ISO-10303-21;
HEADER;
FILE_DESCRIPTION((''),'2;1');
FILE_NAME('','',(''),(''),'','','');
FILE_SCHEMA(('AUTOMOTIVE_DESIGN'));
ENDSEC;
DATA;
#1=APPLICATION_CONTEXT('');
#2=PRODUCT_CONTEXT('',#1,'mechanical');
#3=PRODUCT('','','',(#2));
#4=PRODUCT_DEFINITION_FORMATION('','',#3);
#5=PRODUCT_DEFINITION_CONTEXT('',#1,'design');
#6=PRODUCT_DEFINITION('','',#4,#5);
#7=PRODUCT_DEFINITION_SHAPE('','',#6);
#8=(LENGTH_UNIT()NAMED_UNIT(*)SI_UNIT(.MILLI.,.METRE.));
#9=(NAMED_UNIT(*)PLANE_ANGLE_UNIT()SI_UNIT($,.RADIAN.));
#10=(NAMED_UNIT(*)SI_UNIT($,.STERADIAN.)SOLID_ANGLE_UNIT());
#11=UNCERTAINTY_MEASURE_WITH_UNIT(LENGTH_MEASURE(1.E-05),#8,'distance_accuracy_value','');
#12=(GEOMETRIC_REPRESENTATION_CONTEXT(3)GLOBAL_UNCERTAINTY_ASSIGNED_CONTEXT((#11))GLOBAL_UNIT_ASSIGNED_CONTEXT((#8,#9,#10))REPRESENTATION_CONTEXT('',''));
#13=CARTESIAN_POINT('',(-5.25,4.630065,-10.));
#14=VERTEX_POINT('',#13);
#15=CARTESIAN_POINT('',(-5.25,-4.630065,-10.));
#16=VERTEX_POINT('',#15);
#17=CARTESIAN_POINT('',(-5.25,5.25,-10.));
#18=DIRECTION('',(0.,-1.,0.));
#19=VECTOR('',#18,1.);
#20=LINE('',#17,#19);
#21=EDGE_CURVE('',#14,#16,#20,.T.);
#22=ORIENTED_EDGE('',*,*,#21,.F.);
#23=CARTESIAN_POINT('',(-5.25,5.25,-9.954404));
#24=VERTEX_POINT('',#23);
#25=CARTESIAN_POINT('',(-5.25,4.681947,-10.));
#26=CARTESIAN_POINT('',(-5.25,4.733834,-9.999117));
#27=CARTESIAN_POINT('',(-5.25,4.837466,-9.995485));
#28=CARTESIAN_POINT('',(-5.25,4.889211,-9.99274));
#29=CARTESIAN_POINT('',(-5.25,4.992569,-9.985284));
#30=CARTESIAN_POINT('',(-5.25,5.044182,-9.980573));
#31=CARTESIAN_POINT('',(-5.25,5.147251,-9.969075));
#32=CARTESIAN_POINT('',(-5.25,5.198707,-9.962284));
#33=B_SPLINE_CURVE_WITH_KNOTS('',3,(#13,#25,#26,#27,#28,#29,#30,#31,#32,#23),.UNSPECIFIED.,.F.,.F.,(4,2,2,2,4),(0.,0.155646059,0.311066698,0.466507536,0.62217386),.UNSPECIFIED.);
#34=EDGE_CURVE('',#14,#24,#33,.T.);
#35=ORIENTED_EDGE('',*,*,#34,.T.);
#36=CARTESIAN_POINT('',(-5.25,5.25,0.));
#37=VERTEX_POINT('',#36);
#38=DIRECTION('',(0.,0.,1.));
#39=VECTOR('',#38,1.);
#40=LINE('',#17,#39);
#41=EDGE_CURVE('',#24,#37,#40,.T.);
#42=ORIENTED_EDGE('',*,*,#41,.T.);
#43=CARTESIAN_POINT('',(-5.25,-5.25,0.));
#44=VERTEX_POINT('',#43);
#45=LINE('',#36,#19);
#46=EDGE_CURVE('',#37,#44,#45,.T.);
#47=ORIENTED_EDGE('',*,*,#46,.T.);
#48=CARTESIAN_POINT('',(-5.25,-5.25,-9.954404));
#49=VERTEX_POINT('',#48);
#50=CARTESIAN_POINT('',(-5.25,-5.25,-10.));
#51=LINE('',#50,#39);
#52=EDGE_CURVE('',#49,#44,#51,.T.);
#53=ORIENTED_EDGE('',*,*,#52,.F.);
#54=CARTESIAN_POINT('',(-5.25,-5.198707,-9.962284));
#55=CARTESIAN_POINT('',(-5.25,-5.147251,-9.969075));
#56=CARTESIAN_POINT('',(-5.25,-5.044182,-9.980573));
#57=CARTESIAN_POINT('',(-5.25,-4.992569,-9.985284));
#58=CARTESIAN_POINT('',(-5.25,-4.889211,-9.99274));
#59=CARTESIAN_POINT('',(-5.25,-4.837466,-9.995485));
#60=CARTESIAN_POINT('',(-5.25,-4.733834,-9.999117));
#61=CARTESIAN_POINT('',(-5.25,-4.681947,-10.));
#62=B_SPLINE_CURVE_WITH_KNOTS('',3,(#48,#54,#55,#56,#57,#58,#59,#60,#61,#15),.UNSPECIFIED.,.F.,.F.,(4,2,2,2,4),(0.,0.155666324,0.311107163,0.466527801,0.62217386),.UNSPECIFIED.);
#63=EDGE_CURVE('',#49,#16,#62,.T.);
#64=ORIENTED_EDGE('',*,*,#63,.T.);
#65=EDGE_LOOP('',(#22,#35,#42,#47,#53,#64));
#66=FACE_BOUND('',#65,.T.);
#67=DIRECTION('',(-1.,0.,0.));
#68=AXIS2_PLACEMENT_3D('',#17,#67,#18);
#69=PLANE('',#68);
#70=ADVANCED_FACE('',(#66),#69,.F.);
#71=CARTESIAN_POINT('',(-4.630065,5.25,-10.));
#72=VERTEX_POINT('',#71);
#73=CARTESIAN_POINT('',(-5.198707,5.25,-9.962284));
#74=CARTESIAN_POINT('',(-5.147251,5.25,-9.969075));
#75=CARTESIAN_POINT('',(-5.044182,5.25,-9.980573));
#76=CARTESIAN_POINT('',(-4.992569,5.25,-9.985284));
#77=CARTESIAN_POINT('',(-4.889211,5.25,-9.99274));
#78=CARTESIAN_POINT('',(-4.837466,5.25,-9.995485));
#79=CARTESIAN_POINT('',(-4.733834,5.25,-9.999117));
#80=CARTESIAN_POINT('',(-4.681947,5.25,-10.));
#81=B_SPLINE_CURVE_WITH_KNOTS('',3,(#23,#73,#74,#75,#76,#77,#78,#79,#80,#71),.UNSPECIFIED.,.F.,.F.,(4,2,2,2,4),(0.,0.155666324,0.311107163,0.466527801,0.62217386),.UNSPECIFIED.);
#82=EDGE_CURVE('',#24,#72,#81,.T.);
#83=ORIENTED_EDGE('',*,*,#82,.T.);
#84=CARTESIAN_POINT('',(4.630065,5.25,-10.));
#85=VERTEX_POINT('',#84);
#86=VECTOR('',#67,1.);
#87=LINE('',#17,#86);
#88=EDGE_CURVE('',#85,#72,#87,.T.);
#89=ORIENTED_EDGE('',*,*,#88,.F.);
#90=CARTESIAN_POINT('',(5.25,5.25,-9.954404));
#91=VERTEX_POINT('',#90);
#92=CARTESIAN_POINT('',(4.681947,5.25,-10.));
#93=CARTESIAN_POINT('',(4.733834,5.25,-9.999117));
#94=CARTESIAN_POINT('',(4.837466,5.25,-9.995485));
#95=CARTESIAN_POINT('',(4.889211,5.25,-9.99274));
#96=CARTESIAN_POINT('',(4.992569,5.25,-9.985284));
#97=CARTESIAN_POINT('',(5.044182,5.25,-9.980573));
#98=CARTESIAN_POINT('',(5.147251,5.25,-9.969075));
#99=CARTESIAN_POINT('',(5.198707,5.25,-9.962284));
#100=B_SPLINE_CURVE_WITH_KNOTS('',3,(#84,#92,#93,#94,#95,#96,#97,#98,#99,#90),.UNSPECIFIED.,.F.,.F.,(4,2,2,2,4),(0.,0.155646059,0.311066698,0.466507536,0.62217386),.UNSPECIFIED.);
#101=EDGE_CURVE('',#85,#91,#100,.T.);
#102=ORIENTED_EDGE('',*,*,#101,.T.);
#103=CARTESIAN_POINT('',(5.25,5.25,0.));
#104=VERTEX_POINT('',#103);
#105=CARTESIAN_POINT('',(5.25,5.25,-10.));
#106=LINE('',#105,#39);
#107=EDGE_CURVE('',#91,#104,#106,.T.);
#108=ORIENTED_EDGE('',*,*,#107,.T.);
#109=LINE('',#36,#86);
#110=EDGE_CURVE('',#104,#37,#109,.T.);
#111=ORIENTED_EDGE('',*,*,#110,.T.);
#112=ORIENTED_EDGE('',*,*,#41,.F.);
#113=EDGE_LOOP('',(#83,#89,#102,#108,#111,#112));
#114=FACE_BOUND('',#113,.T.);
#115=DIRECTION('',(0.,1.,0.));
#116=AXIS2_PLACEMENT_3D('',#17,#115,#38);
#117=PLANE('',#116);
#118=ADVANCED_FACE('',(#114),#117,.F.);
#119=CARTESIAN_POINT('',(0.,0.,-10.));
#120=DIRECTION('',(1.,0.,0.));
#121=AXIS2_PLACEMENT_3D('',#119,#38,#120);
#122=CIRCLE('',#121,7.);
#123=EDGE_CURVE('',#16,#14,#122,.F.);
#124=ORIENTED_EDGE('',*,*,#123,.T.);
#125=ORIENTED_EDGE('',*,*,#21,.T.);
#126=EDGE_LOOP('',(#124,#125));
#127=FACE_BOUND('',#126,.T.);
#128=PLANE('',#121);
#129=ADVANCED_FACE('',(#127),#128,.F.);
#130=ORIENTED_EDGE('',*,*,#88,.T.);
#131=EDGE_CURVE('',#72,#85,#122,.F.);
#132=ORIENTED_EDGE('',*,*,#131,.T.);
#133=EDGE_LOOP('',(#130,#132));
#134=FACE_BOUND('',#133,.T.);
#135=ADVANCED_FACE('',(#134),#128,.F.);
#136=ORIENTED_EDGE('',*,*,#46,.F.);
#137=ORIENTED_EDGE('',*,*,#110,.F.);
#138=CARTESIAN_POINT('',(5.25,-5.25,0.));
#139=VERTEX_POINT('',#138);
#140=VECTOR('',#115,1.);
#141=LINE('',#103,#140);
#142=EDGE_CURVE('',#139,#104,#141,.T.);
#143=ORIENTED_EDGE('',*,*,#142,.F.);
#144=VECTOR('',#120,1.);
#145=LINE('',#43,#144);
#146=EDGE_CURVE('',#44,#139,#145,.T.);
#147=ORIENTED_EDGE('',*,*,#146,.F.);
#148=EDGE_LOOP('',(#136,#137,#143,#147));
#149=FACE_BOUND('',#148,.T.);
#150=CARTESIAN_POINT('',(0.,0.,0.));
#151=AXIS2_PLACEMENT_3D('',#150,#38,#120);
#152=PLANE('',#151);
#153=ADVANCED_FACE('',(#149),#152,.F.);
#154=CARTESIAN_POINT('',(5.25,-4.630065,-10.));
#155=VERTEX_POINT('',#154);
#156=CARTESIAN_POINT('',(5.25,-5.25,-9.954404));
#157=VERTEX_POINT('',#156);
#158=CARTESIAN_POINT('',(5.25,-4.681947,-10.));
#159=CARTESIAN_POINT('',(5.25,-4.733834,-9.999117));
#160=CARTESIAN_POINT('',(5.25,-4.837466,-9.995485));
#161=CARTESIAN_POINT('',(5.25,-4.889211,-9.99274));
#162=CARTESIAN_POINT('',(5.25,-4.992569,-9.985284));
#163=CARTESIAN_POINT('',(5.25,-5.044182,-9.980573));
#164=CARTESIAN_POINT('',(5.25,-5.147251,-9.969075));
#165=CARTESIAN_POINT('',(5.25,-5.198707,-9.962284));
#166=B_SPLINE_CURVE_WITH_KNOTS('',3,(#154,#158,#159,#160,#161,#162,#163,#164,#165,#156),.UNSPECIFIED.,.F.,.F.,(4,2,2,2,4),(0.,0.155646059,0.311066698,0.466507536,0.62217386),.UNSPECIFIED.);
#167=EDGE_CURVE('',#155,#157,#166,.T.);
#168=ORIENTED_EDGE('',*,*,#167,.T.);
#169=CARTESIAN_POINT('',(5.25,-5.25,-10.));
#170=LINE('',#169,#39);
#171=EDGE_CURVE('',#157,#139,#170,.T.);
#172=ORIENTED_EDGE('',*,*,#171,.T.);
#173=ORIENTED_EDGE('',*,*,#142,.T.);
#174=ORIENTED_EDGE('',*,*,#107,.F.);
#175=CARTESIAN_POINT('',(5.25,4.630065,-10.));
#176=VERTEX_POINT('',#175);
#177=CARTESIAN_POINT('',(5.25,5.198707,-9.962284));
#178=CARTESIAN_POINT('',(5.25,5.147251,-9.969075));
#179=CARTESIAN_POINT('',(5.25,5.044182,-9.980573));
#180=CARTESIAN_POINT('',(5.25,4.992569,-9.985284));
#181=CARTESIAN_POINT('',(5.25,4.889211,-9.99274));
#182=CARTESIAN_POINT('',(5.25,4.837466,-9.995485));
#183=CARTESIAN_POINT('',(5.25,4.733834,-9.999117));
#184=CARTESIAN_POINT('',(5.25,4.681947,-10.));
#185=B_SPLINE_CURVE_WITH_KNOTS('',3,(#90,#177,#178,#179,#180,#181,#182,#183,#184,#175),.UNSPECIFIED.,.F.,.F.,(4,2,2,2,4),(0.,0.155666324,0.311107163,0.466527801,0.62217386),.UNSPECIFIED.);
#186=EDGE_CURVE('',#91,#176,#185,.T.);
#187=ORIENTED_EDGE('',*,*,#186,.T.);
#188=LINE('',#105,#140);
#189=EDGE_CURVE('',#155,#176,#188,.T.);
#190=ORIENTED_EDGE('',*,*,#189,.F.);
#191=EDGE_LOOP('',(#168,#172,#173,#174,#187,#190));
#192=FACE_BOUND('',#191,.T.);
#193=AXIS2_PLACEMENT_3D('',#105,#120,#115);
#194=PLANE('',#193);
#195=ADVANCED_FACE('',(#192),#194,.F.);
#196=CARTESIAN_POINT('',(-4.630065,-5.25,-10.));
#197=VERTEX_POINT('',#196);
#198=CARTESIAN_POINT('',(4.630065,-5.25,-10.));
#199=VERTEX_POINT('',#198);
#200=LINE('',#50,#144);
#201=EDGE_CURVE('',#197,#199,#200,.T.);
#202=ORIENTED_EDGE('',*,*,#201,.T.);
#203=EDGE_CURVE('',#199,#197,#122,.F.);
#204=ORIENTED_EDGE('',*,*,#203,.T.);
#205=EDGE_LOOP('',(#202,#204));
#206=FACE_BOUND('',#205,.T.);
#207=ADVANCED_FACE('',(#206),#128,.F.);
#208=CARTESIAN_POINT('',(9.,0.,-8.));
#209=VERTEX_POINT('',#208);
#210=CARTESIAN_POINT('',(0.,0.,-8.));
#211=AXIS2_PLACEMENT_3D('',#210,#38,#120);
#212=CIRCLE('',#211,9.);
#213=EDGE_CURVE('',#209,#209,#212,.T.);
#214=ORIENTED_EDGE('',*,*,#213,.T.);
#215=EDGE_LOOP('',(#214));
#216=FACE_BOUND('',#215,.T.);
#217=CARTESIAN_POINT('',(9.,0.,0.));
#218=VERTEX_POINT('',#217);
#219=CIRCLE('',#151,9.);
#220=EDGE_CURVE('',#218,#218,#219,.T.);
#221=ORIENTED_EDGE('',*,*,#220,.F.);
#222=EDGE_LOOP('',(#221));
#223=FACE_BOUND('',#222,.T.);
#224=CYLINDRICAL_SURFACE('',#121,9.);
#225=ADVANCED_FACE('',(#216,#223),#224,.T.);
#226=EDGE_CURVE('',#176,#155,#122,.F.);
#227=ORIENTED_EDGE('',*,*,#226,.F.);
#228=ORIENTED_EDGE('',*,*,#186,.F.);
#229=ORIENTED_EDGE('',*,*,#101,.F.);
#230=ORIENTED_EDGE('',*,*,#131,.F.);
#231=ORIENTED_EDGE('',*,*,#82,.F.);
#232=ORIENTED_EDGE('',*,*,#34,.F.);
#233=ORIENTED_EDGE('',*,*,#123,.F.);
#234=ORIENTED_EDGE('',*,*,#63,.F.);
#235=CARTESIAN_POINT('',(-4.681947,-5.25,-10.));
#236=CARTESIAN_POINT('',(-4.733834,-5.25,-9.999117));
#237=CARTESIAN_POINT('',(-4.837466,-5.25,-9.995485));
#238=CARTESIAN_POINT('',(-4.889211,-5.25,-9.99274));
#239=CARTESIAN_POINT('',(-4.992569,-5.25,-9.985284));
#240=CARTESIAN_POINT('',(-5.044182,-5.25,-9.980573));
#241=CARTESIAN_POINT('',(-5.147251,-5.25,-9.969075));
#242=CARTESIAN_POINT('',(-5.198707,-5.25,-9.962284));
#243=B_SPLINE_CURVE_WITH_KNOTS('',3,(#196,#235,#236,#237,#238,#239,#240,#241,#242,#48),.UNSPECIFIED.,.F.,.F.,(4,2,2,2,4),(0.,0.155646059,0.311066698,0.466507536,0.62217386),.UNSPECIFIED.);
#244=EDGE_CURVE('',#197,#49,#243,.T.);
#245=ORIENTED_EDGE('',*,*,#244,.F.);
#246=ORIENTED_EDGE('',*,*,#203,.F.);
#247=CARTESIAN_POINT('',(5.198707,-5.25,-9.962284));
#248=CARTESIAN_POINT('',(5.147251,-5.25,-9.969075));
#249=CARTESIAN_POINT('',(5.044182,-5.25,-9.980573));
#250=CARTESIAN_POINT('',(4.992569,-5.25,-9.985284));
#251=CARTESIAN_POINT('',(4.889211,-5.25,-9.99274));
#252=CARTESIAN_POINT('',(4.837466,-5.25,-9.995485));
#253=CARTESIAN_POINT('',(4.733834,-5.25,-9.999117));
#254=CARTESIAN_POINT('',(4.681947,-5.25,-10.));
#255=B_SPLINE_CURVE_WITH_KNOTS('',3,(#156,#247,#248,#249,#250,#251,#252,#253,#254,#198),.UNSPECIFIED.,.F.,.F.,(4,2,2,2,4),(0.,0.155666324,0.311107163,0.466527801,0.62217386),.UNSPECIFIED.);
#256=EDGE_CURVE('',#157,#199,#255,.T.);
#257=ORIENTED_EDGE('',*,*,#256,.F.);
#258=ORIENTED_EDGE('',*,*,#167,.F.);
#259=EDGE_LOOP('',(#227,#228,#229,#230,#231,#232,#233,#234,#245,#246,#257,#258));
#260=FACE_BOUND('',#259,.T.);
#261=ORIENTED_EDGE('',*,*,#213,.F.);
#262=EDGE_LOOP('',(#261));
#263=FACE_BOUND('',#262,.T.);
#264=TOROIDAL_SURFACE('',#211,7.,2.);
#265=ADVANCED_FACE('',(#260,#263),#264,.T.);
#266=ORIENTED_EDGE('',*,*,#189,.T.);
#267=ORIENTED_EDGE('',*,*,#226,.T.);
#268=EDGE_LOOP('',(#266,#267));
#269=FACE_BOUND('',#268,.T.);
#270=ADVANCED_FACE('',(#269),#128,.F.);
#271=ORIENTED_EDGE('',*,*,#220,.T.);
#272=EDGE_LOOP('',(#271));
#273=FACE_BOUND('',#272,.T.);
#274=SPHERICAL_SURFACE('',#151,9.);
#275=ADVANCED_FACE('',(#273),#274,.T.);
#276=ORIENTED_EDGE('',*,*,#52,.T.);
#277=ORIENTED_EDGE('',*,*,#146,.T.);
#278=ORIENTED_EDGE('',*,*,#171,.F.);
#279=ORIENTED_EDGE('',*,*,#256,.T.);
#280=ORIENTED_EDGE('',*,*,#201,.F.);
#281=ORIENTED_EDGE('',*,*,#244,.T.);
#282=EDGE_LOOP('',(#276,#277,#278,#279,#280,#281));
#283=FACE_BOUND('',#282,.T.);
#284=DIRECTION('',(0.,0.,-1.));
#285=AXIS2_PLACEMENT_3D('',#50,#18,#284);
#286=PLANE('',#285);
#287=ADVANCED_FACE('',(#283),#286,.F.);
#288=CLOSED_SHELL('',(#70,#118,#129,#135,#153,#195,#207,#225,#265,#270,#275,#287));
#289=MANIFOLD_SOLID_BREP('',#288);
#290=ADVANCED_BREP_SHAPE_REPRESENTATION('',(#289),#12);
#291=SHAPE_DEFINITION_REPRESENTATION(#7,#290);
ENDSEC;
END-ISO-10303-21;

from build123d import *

# Parameters (mm, degrees)
SKETCH_3_R          = 9
EXTRUDE_1_DEPTH     = 10
SKETCH_2_W          = 10.5
SKETCH_2_H          = 10.5
CUT_EXTRUDE_1_DEPTH = 10
FILLET_1_R          = 2


with BuildPart() as part:
    # 草图1 → 旋转1 (revolve)
    with BuildSketch(Plane.XY):
        with BuildLine():
            Line((0, 9), (0, -9))
            ThreePointArc((0, -9), (9, 0), (0, 9))
        make_face()
    revolve(axis=Axis((0, 9, 0), (0, -1, 0)))

    # 草图3 → 凸台-拉伸1 (add)
    with BuildSketch(Plane.XY):
        Circle(SKETCH_3_R)
    extrude(amount=-EXTRUDE_1_DEPTH)

    # 草图2 → 切除-拉伸1 (cut)
    with BuildSketch(Plane.XY):
        Rectangle(SKETCH_2_W, SKETCH_2_H)
    extrude(amount=-CUT_EXTRUDE_1_DEPTH, mode=Mode.SUBTRACT)

    # 圆角1
    # the kernel refuses this fillet: 2 mm, written as the material it takes off along each edge
    with BuildSketch(Plane(origin=(0, 0, -10), x_dir=(1, 0, 0), z_dir=(0, -1, 0))) as fillet_1_piece_1:
        with BuildLine():
            CenterArc((9 - FILLET_1_R, FILLET_1_R), FILLET_1_R, 270, 90)
            Line((9 - FILLET_1_R, 0), (9, 0))
            Line((9, 0), (9, FILLET_1_R))
        make_face()
    revolve(axis=Axis((0, 0, -10), (0, 0, 1)), mode=Mode.SUBTRACT)


solid = part.part
